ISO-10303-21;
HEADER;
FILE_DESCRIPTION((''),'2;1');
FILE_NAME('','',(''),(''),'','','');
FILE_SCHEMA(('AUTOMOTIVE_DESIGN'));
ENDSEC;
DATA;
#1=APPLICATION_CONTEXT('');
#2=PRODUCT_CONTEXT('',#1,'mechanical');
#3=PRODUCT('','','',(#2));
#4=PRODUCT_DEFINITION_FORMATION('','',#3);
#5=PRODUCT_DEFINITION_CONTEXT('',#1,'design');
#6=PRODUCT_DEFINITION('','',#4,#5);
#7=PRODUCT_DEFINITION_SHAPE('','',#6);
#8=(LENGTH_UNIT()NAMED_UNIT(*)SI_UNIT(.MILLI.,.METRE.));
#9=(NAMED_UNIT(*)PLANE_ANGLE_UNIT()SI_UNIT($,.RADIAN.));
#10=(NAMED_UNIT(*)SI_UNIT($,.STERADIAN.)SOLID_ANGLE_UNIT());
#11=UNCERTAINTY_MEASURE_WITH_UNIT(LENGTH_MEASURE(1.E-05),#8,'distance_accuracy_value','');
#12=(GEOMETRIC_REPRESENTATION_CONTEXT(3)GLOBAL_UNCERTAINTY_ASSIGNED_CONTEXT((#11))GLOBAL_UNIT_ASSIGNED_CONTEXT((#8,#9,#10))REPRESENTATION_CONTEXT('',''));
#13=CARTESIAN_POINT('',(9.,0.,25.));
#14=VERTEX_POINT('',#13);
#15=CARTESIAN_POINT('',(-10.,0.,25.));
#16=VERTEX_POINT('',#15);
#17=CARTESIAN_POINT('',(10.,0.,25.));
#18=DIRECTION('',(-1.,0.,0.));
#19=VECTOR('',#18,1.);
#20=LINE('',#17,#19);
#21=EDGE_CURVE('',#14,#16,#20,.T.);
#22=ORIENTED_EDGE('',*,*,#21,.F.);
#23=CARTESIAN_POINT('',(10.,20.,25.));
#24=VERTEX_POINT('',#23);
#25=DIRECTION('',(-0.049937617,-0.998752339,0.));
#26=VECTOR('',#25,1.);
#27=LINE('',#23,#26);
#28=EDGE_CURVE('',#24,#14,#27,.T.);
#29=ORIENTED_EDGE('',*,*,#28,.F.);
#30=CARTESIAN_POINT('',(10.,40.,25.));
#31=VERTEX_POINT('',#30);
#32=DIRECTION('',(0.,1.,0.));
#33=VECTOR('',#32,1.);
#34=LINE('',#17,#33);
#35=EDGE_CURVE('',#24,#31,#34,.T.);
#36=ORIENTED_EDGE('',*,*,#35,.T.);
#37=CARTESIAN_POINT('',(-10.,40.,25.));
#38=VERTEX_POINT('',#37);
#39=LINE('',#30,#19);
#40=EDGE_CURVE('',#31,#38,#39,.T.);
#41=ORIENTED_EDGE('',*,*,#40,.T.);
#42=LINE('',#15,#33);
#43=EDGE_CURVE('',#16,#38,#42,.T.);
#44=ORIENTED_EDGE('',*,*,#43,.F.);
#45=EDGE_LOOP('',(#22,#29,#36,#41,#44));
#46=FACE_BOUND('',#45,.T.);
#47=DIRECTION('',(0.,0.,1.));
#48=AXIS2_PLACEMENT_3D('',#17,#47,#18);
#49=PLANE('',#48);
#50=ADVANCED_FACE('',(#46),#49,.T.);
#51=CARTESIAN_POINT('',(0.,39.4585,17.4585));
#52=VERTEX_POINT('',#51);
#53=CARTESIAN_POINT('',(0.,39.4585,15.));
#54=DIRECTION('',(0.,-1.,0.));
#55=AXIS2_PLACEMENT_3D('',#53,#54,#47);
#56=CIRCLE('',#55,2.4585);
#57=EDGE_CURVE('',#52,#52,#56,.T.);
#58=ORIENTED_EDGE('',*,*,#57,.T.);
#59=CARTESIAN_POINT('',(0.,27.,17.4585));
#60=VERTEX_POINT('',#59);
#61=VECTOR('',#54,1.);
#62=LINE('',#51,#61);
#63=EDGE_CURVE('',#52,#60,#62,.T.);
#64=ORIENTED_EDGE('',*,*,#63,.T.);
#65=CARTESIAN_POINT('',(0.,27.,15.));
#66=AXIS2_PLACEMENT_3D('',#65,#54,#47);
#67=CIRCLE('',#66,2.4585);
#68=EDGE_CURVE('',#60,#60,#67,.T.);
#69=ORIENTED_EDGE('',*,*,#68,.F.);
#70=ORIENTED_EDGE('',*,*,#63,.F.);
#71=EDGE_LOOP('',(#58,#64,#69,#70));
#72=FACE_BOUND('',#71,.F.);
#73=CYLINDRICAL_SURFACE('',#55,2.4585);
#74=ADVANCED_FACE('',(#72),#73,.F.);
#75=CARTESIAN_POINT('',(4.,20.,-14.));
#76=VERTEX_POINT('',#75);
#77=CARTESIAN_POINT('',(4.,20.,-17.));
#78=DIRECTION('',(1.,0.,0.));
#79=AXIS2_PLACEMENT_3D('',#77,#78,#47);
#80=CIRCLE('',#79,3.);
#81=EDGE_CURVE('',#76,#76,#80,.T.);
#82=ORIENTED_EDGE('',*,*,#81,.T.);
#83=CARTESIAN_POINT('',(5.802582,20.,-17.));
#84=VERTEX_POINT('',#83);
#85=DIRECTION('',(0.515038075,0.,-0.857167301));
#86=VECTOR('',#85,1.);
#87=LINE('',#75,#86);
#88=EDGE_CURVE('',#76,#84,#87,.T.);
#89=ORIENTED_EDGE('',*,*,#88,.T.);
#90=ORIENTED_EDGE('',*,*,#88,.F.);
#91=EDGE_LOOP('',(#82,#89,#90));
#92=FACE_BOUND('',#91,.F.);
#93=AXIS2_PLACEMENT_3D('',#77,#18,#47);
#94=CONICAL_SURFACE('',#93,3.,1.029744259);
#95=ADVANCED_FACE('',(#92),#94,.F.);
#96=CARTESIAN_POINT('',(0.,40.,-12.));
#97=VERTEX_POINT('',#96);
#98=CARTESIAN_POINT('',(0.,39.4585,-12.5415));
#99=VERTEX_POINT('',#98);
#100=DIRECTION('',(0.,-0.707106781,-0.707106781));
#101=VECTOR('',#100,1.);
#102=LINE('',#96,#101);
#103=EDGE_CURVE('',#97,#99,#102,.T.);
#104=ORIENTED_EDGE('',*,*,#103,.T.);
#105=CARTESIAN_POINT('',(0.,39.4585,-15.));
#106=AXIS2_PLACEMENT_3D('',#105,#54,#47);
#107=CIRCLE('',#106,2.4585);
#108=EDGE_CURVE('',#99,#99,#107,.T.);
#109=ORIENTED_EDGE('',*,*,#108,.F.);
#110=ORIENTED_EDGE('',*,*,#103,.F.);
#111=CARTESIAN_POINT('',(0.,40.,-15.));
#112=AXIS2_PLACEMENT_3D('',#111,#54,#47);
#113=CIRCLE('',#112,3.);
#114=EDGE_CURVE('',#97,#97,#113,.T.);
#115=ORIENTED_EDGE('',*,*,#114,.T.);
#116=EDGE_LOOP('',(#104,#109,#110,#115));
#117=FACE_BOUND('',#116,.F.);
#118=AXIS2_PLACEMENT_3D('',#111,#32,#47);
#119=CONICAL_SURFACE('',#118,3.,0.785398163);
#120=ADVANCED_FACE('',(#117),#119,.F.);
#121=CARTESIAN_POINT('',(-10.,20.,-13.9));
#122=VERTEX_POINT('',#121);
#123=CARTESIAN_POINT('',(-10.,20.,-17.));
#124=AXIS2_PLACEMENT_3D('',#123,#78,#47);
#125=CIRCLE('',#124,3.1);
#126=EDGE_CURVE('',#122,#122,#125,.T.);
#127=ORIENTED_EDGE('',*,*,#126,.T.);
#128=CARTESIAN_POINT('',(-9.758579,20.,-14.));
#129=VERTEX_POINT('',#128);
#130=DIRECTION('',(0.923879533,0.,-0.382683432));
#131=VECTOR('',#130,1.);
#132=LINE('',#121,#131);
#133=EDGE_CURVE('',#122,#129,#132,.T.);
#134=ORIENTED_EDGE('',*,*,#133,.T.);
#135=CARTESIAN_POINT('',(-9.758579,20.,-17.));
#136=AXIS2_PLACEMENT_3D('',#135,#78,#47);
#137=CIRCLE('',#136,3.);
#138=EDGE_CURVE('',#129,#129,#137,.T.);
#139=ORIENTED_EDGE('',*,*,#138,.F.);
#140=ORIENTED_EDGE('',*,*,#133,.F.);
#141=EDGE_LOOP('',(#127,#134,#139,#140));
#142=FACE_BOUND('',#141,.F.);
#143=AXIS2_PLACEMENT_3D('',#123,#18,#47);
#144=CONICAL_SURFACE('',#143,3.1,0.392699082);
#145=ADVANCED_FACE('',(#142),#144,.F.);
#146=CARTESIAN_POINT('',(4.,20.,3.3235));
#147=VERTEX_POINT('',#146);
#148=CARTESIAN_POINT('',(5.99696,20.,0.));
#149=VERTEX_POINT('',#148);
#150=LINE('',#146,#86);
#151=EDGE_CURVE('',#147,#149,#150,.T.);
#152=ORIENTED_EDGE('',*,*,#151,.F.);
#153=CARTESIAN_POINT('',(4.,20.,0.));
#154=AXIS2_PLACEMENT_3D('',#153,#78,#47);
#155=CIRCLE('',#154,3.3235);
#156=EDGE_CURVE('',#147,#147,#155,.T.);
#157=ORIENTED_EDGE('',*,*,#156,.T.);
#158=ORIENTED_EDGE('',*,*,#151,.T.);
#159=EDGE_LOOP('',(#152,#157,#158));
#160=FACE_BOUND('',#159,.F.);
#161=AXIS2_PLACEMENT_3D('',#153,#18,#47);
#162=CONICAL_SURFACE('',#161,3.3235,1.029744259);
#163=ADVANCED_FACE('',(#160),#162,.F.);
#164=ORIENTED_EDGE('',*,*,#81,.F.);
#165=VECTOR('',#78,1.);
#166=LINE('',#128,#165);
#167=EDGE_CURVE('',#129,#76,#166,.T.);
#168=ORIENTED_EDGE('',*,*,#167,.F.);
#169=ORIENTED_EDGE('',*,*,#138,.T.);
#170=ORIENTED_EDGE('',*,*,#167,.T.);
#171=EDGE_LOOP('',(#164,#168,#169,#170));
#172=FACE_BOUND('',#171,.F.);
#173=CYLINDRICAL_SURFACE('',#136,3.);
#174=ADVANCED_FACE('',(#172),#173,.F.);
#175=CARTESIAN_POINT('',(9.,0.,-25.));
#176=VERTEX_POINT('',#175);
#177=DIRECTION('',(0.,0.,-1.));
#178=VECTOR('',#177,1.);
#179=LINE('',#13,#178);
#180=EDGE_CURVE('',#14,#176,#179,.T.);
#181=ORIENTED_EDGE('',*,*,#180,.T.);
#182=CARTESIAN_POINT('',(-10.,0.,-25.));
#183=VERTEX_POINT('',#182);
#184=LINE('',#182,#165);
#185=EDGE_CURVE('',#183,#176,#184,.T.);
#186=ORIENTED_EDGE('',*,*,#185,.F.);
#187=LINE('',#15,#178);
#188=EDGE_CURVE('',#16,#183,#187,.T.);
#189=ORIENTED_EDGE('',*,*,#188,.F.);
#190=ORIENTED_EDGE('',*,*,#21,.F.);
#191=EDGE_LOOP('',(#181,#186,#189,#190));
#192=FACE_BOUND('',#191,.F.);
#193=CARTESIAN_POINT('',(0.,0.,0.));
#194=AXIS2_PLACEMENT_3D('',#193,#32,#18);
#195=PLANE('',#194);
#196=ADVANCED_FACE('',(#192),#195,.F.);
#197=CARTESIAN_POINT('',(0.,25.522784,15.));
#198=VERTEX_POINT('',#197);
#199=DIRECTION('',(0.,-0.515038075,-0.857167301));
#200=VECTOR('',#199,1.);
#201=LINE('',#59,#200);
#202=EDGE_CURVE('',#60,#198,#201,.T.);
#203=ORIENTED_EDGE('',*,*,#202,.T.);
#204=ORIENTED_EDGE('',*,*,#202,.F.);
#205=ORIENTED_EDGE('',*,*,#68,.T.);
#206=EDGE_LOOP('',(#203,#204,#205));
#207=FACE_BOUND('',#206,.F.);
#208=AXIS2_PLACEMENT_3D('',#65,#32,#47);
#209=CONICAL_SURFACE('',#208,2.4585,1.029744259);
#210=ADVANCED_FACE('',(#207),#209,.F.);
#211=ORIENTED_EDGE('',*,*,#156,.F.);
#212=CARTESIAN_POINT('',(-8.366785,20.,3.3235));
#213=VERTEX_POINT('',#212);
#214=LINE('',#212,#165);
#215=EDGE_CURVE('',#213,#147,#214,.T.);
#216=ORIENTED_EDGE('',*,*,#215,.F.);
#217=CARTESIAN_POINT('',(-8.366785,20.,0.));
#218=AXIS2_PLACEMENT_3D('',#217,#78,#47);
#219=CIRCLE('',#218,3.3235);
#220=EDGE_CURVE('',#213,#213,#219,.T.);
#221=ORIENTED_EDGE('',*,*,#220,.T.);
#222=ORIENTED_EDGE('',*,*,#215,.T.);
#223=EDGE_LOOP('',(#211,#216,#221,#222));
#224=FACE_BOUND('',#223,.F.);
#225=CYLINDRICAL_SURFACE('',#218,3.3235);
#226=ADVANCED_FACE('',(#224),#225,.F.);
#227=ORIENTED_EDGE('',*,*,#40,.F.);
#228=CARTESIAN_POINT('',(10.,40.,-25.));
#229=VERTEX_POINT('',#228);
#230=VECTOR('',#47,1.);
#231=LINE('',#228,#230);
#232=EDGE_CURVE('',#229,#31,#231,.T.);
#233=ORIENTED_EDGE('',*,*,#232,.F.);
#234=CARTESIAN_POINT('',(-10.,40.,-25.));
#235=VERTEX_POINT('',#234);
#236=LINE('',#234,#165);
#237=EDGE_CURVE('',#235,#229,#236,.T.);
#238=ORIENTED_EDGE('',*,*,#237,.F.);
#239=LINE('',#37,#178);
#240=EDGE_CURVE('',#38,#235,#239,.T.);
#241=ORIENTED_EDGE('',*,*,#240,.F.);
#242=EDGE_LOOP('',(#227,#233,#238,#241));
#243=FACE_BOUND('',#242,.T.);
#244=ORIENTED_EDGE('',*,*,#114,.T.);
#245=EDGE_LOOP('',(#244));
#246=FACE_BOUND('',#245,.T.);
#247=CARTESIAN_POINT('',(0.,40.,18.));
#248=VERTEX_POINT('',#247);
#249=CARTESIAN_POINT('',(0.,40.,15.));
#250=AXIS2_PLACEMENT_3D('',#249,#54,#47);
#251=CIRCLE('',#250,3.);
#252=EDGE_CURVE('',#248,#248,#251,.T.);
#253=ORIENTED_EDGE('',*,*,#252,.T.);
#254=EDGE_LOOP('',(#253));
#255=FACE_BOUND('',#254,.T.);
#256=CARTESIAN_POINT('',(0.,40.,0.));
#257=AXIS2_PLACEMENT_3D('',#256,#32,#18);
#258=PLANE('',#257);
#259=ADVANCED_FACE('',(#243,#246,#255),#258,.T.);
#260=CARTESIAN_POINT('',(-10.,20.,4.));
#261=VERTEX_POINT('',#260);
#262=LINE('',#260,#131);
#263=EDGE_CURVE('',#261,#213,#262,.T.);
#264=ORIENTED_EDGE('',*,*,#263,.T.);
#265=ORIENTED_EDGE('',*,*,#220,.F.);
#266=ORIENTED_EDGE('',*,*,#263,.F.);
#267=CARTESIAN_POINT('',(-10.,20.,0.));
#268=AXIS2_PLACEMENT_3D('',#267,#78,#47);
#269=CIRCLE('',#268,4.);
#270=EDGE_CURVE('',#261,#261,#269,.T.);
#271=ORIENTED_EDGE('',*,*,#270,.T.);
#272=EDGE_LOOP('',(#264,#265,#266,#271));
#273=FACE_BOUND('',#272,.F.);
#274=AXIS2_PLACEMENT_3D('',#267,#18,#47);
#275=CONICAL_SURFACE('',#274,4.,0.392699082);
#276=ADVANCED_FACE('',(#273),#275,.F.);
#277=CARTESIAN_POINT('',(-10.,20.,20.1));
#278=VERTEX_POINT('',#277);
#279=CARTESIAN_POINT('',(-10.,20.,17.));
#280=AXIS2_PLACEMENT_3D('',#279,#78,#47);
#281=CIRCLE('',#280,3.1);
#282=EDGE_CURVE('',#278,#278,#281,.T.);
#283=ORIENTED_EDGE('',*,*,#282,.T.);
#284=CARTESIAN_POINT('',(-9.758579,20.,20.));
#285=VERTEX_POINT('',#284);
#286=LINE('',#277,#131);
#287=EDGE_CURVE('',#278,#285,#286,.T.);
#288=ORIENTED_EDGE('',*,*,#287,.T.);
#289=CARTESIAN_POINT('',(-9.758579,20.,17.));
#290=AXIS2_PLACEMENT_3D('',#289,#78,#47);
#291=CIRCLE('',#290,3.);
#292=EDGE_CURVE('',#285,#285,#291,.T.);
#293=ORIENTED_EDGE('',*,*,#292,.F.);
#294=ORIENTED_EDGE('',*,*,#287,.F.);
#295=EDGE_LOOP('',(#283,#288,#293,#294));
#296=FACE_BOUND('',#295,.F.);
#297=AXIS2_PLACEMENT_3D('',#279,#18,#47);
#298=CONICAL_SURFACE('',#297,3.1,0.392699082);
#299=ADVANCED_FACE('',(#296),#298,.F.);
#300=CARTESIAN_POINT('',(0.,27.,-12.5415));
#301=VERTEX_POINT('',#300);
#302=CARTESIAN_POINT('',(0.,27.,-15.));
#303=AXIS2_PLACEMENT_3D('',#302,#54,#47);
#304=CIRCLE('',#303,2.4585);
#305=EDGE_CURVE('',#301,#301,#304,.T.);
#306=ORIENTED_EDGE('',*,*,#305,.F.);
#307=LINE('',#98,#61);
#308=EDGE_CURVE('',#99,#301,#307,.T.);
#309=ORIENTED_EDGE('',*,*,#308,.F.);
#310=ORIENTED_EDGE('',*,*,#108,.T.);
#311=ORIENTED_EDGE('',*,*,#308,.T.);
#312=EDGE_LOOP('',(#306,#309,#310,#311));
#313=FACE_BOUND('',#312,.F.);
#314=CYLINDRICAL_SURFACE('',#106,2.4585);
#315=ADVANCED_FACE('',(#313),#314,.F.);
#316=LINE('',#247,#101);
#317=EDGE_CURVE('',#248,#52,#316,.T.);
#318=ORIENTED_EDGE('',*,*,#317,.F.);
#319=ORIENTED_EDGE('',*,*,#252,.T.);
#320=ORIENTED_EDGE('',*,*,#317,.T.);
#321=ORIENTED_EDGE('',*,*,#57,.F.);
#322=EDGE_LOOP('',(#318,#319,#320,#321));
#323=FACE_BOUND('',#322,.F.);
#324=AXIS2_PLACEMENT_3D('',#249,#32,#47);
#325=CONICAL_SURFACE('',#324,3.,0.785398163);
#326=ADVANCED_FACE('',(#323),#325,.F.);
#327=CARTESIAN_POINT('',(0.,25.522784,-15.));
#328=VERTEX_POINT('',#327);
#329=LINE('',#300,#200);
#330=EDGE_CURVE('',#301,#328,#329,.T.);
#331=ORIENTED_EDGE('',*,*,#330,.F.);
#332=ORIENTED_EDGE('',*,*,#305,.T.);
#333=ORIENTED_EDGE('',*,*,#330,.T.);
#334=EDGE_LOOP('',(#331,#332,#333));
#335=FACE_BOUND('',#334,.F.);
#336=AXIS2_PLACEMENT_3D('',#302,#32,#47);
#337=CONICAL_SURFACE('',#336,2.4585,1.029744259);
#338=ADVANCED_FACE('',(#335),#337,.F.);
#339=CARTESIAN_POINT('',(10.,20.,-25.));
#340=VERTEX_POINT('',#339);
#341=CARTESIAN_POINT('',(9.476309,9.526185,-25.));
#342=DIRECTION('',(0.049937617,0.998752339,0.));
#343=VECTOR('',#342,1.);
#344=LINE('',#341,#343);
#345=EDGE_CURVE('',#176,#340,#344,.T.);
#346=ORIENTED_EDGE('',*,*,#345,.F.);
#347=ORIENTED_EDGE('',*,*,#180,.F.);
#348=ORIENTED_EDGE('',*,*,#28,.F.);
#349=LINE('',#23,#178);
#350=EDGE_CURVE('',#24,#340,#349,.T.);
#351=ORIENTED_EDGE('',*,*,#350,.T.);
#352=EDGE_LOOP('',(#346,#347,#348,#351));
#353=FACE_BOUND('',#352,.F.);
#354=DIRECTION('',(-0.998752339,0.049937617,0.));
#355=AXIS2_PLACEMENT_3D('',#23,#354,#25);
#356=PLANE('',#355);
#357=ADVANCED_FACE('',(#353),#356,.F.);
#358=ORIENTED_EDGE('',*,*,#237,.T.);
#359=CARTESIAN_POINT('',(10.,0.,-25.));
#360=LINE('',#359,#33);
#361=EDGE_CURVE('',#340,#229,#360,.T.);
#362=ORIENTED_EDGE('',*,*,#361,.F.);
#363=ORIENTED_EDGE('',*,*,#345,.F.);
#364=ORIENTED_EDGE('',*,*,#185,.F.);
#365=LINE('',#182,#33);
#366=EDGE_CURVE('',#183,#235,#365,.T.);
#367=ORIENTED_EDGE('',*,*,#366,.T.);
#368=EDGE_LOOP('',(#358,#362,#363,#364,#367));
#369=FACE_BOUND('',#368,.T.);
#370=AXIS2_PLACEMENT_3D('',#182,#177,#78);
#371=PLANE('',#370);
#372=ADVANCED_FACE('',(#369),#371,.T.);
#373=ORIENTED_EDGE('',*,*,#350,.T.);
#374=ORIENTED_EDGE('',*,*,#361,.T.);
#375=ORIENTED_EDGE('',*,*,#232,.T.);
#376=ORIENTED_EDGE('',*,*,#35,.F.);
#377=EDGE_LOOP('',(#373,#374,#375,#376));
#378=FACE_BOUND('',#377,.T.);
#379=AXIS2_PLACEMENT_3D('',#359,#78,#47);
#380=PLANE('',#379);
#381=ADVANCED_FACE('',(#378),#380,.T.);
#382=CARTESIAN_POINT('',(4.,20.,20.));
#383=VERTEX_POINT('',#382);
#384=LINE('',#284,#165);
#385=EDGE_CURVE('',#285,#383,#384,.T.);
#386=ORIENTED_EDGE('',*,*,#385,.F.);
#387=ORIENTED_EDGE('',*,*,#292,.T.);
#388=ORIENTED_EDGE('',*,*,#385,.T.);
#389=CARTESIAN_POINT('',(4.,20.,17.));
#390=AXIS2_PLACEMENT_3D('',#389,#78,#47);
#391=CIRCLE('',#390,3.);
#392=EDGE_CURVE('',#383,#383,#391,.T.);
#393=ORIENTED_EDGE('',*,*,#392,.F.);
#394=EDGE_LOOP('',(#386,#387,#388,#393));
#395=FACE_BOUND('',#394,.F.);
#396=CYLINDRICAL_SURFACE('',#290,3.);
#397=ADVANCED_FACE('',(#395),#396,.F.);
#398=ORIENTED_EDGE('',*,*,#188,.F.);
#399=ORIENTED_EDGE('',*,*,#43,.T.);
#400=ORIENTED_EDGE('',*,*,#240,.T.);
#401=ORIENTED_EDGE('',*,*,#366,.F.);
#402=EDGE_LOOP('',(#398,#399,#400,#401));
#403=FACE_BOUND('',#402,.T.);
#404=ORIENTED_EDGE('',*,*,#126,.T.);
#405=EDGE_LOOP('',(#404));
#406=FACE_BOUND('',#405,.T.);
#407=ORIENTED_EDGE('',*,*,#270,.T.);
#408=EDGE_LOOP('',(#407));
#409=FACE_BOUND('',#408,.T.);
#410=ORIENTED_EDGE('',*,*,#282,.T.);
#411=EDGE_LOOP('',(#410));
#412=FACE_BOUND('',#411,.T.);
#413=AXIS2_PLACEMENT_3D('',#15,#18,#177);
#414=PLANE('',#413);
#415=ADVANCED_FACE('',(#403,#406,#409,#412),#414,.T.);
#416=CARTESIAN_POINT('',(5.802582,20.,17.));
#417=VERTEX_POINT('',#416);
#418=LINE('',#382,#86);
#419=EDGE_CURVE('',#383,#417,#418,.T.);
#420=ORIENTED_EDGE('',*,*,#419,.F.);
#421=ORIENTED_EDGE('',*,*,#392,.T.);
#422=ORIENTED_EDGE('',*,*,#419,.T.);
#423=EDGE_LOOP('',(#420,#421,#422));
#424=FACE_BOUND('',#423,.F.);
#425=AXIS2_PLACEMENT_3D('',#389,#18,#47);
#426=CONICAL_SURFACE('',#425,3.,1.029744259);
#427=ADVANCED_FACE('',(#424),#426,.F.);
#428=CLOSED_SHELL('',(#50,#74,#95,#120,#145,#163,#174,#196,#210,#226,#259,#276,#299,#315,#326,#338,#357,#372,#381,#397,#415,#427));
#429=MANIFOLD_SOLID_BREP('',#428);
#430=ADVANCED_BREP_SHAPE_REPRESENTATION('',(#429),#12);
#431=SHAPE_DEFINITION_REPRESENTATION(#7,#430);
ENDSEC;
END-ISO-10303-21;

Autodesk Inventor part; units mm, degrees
ref_plane "YZ Plane" through (0, 0, 0) normal (1, 0, 0) x (0, 1, 0)
ref_plane "XZ Plane" through (0, 0, 0) normal (0, 1, 0) x (-1, 0, 0)
ref_plane "XY Plane" through (0, 0, 0) normal (0, 0, 1) x (1, 0, 0)
sketch "Sketch2" plane through (0, 0, 0) normal (0, 1, 0) x (-1, 0, 0)
  line L0 (-10, 25) -> (10, 25)
  line L1 (10, 25) -> (10, -25)
  line L2 (10, -25) -> (-10, -25)
  line L3 (-10, -25) -> (-10, 25)
  line L4 (-10, 25) -> (10, -25) construction
  line L5 (10, 25) -> (-10, -25) construction
  point P0 (0, 0)
  dimension "d0" = 50
  dimension "d1" = 20
extrude "Extrusion1" add sketch "Sketch2" along normal blind 40
sketch "Sketch3" plane through (-10, 0, 25) normal (0, 0, 1) x (1, 0, 0)
  line L0 (20, 0) -> (20, 40) projected
  line L1 (20, 40) -> (20, 20)
  line L2 (0, 40) -> (20, 40) projected
  line L3 (20, 20) -> (19, 0)
  line L4 (20, 0) -> (0, 0) projected
  line L5 (19, 0) -> (20, 0)
  line L6 (20, 0) -> (20, 20)
  point P0 (10, 0)
  dimension "d4" = 20
  dimension "d5" = 1
extrude "Extrusion2" cut sketch "Sketch3" against normal through all
sketch "Sketch4" plane through (-10, 0, -25) normal (-1, 0, 0) x (0, 0, 1)
  line L0 (0, 0) -> (0, 40) projected
  line L1 (50, 0) -> (50, 40) projected
  line L2 (25, 0) -> (25, 40) construction
  line L3 (50, 40) -> (0, 40) projected
  line L4 (0, 20) -> (50, 20) construction
  line L5 (0, 0) -> (50, 0) projected
  point P0 (8, 20)
  point P1 (42, 20)
  point P2 (25, 20)
  dimension "d8" = 8
  dimension "d9" = 8
  dimension "d10" = 20
hole "Hole1" at (-10, 20, -17) at (-10, 20, 17) direction (1, 0, 0) diameter 6 depth 14 tip angle 118 countersink diameter 6.2 countersink angle 45
hole "Hole2" at (-10, 20, 0) direction (1, 0, 0) diameter 6.647 depth 14 tip angle 118 countersink diameter 8 countersink angle 45 thread size "M8x1.25" class "6H" standard "ISO Metric profile"
sketch "Sketch5" plane through (0, 40, 0) normal (0, 1, 0) x (1, 0, 0)
  line L0 (10, 25) -> (-10, 25) projected
  line L1 (-10, 25) -> (-10, -25) projected
  line L2 (-10, -25) -> (10, -25) projected
  line L3 (10, -25) -> (10, 25) projected
  line L4 (0, 25) -> (0, -25) construction
  point P0 (0, 0)
  point P1 (0, 15)
  point P2 (0, -15)
  point P3 (0, 0)
  dimension "d25" = 15
  dimension "d26" = 15
hole "Hole3" at (0, 40, -15) at (0, 40, 15) direction (0, -1, 0) diameter 4.917 depth 13 tip angle 118 countersink diameter 6 countersink angle 90 thread size "M6x1" class "6H" standard "ISO Metric profile"
equation "\"d0\" = Länge_Backe"
equation "\"d1\" = Breite_Backe"
equation "\"d2\" = Höhe_Backe"
equation "\"d4\" = Absatz_Höhe"
equation "\"d5\" = 0.5 * Max_Versatz"
equation "\"d8\" = d9"
equation "\"d9\" = Abstand_Bolzen"
equation "\"d10\" = Höhe_Schrauben"
equation "\"d11\" = Bolzen_Durchmesser"
equation "\"d25\" = 0.5 * Abstand_Bohrung_Vertikale_halterung"
equation "\"d26\" = d25"
equation "\"Breite_Backe\" = 20"
equation "\"Höhe_Backe\" = 40"
equation "\"Länge_Backe\" = 50"
equation "\"Absatz_Höhe\" = 20"
equation "\"Max_Versatz\" = 2"
equation "\"Abstand_Bolzen\" = 8"
equation "\"Höhe_Schrauben\" = 20"
equation "\"Bolzen_Durchmesser\" = 6"
equation "\"Abstand_Bohrung_Vertikale_halterung\" = 30"
properties part number "ER_Positionierungseinheit_Backe_int"
